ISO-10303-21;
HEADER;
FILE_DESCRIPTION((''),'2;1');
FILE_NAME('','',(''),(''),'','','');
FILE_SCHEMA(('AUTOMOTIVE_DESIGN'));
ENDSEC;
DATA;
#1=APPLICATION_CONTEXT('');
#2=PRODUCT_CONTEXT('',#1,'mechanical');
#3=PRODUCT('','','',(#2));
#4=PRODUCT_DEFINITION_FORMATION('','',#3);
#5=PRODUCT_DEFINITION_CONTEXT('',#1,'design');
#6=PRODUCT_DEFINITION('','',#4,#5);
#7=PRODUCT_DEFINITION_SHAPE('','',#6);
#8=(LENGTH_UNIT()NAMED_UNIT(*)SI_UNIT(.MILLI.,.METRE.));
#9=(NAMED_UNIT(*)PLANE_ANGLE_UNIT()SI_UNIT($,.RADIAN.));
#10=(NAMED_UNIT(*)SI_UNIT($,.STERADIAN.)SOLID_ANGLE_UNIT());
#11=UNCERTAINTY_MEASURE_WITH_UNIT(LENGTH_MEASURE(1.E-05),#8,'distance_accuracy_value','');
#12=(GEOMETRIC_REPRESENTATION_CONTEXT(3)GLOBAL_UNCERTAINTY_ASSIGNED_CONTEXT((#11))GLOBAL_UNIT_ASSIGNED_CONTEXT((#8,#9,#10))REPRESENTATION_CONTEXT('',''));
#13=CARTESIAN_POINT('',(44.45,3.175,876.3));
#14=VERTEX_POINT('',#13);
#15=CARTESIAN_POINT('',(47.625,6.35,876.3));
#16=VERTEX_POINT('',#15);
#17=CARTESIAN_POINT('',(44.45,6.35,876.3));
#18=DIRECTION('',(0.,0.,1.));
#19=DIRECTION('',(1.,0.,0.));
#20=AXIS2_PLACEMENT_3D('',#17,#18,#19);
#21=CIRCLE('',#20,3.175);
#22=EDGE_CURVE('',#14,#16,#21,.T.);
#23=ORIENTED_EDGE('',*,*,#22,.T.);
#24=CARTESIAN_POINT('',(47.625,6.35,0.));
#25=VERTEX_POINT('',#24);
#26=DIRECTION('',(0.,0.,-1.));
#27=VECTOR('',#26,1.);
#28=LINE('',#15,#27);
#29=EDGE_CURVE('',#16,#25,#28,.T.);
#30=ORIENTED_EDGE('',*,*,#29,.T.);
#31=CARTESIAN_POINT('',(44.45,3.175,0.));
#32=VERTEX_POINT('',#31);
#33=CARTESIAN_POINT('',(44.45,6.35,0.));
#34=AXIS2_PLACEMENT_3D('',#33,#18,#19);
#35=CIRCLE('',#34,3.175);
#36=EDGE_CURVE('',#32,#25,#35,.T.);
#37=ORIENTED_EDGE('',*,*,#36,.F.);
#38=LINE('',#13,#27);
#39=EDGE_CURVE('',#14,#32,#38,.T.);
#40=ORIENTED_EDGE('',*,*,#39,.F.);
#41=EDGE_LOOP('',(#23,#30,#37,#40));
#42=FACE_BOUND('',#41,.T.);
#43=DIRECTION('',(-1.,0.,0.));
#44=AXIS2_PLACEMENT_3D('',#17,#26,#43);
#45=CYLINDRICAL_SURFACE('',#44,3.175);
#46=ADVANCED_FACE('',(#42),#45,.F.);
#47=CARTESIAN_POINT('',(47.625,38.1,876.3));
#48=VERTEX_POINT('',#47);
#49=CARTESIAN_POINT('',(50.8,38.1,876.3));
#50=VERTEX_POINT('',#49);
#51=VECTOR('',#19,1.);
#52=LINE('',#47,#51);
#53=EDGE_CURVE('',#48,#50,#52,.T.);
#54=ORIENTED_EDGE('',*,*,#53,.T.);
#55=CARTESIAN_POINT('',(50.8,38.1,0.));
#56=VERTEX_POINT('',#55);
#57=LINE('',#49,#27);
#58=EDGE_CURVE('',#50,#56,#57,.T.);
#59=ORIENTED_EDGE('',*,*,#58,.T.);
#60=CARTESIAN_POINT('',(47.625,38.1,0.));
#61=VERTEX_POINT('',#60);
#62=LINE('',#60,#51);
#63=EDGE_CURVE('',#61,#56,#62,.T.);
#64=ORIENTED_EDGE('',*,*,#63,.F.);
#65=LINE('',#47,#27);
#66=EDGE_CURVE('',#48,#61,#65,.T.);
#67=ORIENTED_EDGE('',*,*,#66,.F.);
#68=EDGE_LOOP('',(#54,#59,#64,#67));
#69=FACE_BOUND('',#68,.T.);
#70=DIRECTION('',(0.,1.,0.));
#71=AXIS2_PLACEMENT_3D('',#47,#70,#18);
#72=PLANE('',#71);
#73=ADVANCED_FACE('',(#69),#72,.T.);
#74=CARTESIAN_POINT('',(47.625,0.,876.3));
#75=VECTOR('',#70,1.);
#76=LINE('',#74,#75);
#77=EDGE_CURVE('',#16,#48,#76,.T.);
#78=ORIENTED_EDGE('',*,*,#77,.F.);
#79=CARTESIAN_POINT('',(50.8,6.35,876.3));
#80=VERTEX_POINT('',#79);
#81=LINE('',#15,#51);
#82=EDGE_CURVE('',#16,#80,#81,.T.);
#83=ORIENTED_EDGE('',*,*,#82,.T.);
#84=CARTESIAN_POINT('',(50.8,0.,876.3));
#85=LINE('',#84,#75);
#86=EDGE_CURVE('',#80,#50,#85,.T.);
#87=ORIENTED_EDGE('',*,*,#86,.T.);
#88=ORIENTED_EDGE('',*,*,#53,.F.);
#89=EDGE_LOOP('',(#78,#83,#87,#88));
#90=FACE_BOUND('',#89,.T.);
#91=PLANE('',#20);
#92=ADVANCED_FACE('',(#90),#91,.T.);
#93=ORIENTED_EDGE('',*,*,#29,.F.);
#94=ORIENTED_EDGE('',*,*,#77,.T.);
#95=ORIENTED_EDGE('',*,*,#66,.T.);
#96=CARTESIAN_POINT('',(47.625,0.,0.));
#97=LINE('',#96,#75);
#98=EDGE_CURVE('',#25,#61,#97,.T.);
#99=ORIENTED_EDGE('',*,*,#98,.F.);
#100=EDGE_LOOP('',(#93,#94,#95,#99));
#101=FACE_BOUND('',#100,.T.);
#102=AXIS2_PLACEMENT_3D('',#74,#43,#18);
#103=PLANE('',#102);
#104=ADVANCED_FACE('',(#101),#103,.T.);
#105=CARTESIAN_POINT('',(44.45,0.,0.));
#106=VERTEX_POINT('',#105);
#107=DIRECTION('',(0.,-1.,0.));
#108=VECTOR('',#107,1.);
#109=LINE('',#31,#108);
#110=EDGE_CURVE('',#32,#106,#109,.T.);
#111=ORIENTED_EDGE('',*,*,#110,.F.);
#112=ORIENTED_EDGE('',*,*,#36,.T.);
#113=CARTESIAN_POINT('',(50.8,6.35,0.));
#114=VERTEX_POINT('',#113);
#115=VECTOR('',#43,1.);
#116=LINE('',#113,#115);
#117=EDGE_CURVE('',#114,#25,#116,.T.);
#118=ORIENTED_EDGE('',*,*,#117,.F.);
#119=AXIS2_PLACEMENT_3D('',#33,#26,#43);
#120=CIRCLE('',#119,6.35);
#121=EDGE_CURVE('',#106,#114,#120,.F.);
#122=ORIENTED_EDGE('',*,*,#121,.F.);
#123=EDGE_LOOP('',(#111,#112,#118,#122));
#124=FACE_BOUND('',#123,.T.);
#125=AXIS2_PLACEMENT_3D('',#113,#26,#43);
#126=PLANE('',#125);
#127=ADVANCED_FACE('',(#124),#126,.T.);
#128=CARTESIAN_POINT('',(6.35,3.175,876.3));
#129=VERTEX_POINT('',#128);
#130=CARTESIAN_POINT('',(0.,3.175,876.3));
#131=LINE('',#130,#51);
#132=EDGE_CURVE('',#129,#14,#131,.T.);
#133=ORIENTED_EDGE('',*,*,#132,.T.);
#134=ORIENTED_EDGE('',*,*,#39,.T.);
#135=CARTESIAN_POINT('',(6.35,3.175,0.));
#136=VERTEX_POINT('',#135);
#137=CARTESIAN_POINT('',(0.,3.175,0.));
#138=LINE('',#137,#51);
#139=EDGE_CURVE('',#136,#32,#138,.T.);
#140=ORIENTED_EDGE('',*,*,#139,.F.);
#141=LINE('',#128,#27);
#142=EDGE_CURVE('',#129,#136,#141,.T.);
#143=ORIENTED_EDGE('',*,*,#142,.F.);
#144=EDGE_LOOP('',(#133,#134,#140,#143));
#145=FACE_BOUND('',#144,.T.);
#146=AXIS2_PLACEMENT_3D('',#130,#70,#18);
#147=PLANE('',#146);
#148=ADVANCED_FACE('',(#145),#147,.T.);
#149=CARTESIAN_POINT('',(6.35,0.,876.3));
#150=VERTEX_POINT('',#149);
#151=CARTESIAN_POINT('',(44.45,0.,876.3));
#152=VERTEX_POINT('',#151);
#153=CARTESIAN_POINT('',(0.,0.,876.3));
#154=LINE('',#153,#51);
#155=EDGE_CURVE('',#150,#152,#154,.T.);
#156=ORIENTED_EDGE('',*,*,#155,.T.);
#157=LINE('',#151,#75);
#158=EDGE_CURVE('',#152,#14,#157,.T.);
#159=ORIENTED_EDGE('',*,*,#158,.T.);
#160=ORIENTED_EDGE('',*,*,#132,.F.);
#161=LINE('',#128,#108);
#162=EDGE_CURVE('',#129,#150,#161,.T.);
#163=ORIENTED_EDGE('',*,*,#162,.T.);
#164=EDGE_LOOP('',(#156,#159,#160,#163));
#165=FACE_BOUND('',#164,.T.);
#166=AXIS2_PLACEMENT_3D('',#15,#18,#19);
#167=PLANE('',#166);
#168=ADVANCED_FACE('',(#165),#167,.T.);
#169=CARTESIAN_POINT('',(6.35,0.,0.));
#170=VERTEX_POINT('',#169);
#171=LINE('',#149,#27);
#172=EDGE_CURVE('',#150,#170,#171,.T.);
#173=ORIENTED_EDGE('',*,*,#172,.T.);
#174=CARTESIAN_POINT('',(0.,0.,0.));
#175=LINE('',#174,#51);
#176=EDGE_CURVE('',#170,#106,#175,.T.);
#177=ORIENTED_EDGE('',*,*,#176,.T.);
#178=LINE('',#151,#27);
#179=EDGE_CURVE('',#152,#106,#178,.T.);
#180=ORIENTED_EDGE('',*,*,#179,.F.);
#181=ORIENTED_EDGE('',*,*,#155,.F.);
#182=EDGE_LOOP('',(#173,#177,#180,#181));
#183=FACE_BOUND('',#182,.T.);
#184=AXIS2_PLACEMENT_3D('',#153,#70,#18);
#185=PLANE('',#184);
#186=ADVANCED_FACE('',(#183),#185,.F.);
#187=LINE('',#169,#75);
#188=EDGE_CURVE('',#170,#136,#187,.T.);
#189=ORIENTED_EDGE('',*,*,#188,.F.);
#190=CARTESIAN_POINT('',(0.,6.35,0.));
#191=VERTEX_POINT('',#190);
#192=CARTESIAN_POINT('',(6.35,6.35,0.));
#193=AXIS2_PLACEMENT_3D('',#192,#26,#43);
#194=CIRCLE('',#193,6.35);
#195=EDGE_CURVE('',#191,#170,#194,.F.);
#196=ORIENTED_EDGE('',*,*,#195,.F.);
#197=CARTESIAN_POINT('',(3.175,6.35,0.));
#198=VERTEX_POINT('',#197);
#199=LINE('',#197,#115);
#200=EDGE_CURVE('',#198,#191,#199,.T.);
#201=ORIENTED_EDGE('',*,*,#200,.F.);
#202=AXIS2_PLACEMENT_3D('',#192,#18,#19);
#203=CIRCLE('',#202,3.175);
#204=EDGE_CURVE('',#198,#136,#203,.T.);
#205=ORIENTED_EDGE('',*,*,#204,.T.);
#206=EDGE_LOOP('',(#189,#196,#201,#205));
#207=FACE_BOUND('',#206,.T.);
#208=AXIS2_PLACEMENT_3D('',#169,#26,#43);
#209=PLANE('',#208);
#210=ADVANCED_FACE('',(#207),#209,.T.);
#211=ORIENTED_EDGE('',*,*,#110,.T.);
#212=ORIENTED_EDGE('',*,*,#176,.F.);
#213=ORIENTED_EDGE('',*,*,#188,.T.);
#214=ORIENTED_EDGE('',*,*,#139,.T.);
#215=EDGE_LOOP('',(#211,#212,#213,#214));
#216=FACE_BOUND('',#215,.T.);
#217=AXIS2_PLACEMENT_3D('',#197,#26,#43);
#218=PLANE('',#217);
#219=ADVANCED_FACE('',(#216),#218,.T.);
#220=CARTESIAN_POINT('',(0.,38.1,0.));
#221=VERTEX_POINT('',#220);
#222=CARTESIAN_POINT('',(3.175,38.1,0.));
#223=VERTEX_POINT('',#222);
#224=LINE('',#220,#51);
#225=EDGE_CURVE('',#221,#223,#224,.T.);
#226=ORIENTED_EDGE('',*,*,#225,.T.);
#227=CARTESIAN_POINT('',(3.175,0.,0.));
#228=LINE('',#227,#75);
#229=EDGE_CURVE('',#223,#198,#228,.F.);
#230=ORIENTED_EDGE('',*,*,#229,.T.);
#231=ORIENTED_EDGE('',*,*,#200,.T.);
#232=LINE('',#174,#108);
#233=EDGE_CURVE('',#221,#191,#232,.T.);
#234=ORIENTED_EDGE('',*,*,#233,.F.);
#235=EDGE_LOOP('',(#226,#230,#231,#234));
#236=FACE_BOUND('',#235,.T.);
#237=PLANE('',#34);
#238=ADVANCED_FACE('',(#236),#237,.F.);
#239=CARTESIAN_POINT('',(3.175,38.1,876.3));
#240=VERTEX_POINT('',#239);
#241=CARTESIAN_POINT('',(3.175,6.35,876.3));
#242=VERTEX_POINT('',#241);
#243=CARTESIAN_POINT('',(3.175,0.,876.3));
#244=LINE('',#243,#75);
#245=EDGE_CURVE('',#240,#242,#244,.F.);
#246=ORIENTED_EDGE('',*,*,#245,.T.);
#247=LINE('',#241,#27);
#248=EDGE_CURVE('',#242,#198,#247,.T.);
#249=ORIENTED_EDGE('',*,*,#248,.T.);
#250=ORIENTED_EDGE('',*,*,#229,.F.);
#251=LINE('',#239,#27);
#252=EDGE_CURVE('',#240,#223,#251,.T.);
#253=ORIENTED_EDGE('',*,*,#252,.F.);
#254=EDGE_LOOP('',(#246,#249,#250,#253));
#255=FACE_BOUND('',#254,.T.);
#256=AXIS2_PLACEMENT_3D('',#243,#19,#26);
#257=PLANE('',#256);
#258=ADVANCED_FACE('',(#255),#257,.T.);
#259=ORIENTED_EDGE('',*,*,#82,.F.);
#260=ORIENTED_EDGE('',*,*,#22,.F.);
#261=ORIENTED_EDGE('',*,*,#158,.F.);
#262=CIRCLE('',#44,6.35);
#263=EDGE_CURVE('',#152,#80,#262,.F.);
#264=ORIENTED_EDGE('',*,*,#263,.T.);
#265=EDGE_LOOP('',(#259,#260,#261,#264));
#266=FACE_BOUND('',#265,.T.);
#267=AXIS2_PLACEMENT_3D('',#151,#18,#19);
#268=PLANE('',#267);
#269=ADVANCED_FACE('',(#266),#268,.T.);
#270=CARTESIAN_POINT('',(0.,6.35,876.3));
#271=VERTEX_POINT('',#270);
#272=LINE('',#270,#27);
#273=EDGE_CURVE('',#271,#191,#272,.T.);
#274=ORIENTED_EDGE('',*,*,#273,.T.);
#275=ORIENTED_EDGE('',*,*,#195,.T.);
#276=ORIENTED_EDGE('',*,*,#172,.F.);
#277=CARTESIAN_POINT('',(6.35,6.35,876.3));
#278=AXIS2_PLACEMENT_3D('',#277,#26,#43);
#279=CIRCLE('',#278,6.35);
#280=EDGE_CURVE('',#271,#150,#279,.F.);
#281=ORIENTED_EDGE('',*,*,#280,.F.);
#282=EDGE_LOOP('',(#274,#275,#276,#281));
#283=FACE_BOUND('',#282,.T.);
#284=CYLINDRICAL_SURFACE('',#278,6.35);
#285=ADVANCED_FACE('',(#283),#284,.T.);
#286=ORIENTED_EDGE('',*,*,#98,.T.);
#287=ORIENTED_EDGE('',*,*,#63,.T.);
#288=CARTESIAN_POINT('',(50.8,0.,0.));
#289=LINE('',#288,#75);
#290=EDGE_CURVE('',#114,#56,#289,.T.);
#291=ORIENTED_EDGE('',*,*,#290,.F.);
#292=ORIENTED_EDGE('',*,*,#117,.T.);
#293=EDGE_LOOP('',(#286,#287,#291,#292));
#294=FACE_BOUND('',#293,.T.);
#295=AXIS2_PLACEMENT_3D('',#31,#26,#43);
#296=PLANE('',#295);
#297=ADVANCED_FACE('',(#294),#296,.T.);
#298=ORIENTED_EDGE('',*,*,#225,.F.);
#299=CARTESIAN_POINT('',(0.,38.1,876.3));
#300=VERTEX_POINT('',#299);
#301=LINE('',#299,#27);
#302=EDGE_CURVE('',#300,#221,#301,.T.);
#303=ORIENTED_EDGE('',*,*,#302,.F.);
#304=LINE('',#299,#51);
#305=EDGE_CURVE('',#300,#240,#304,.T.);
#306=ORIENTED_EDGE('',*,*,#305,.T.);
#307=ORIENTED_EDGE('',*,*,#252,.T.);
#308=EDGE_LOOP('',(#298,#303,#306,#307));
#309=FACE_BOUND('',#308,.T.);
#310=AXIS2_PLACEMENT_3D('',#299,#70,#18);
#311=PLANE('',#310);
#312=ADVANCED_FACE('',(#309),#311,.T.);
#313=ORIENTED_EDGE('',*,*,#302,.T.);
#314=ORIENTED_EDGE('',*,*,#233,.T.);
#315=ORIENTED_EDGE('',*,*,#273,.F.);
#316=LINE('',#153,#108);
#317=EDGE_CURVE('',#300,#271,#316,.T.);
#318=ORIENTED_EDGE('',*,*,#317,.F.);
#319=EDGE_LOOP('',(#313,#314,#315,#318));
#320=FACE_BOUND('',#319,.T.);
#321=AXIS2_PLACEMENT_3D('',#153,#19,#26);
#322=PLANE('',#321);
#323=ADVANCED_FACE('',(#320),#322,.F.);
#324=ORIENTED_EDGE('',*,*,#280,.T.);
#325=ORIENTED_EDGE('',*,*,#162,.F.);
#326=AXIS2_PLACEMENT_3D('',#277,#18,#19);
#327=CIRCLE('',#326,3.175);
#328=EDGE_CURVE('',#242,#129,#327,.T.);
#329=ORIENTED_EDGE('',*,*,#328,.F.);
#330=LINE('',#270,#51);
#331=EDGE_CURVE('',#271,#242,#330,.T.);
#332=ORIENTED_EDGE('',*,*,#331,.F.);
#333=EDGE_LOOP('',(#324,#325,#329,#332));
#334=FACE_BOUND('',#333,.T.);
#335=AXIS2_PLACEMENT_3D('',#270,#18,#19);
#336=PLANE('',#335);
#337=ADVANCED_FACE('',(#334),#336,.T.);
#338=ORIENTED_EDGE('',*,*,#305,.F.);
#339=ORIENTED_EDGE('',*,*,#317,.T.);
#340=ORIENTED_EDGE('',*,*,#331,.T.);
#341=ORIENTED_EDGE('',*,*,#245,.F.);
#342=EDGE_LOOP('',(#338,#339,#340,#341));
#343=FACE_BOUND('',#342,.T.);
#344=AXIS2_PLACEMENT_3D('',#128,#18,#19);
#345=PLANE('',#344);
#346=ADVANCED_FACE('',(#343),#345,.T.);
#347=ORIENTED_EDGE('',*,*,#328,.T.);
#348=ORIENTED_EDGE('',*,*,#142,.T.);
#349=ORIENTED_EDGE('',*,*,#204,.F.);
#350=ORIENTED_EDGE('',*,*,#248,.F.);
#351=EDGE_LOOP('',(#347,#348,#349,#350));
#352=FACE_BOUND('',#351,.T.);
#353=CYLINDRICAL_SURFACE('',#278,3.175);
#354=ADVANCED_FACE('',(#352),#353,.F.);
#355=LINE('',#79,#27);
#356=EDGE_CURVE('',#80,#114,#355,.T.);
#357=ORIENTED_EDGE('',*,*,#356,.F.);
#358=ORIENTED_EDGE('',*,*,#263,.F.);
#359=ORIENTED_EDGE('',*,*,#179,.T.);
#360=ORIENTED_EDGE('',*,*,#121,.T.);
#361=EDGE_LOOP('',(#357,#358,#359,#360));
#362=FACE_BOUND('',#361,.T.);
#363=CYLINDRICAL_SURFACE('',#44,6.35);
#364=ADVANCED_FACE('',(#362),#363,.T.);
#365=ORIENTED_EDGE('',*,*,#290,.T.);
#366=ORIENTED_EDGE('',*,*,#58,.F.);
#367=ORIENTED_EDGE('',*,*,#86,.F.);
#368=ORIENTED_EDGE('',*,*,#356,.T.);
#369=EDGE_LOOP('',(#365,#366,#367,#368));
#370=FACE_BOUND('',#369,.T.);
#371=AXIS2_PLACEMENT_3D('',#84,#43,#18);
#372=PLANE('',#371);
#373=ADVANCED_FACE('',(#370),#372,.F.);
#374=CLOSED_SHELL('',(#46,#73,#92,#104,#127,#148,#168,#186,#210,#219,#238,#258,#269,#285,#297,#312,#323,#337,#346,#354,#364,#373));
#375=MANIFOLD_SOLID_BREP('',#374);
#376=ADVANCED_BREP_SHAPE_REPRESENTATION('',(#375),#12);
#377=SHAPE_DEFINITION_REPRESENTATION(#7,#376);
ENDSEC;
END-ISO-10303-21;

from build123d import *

# Parameters (mm, degrees)
BASE_FLANGE1_DEPTH = 876.3


# Sheet-metal steps are written as plain solids
with BuildPart() as part:
    # Sketch1 → Base-Flange1 (new body)
    with BuildSketch(Plane.XY):
        with BuildLine():
            Line((50.8, 38.1), (50.8, 6.35))
            ThreePointArc((50.8, 6.35), (48.940128061, 1.859871939), (44.45, 0))
            Line((44.45, 0), (6.35, 0))
            ThreePointArc((6.35, 0), (1.859871939, 1.859871939), (0, 6.35))
            Line((0, 6.35), (0, 38.1))
            Line((0, 38.1), (3.175, 38.1))
            Line((3.175, 38.1), (3.175, 6.35))
            ThreePointArc((3.175, 6.35), (4.10493597, 4.10493597), (6.35, 3.175))
            Line((6.35, 3.175), (44.45, 3.175))
            ThreePointArc((44.45, 3.175), (46.69506403, 4.10493597), (47.625, 6.35))
            Line((47.625, 6.35), (47.625, 38.1))
            Line((47.625, 38.1), (50.8, 38.1))
        make_face()
    extrude(amount=BASE_FLANGE1_DEPTH)


solid = part.part
